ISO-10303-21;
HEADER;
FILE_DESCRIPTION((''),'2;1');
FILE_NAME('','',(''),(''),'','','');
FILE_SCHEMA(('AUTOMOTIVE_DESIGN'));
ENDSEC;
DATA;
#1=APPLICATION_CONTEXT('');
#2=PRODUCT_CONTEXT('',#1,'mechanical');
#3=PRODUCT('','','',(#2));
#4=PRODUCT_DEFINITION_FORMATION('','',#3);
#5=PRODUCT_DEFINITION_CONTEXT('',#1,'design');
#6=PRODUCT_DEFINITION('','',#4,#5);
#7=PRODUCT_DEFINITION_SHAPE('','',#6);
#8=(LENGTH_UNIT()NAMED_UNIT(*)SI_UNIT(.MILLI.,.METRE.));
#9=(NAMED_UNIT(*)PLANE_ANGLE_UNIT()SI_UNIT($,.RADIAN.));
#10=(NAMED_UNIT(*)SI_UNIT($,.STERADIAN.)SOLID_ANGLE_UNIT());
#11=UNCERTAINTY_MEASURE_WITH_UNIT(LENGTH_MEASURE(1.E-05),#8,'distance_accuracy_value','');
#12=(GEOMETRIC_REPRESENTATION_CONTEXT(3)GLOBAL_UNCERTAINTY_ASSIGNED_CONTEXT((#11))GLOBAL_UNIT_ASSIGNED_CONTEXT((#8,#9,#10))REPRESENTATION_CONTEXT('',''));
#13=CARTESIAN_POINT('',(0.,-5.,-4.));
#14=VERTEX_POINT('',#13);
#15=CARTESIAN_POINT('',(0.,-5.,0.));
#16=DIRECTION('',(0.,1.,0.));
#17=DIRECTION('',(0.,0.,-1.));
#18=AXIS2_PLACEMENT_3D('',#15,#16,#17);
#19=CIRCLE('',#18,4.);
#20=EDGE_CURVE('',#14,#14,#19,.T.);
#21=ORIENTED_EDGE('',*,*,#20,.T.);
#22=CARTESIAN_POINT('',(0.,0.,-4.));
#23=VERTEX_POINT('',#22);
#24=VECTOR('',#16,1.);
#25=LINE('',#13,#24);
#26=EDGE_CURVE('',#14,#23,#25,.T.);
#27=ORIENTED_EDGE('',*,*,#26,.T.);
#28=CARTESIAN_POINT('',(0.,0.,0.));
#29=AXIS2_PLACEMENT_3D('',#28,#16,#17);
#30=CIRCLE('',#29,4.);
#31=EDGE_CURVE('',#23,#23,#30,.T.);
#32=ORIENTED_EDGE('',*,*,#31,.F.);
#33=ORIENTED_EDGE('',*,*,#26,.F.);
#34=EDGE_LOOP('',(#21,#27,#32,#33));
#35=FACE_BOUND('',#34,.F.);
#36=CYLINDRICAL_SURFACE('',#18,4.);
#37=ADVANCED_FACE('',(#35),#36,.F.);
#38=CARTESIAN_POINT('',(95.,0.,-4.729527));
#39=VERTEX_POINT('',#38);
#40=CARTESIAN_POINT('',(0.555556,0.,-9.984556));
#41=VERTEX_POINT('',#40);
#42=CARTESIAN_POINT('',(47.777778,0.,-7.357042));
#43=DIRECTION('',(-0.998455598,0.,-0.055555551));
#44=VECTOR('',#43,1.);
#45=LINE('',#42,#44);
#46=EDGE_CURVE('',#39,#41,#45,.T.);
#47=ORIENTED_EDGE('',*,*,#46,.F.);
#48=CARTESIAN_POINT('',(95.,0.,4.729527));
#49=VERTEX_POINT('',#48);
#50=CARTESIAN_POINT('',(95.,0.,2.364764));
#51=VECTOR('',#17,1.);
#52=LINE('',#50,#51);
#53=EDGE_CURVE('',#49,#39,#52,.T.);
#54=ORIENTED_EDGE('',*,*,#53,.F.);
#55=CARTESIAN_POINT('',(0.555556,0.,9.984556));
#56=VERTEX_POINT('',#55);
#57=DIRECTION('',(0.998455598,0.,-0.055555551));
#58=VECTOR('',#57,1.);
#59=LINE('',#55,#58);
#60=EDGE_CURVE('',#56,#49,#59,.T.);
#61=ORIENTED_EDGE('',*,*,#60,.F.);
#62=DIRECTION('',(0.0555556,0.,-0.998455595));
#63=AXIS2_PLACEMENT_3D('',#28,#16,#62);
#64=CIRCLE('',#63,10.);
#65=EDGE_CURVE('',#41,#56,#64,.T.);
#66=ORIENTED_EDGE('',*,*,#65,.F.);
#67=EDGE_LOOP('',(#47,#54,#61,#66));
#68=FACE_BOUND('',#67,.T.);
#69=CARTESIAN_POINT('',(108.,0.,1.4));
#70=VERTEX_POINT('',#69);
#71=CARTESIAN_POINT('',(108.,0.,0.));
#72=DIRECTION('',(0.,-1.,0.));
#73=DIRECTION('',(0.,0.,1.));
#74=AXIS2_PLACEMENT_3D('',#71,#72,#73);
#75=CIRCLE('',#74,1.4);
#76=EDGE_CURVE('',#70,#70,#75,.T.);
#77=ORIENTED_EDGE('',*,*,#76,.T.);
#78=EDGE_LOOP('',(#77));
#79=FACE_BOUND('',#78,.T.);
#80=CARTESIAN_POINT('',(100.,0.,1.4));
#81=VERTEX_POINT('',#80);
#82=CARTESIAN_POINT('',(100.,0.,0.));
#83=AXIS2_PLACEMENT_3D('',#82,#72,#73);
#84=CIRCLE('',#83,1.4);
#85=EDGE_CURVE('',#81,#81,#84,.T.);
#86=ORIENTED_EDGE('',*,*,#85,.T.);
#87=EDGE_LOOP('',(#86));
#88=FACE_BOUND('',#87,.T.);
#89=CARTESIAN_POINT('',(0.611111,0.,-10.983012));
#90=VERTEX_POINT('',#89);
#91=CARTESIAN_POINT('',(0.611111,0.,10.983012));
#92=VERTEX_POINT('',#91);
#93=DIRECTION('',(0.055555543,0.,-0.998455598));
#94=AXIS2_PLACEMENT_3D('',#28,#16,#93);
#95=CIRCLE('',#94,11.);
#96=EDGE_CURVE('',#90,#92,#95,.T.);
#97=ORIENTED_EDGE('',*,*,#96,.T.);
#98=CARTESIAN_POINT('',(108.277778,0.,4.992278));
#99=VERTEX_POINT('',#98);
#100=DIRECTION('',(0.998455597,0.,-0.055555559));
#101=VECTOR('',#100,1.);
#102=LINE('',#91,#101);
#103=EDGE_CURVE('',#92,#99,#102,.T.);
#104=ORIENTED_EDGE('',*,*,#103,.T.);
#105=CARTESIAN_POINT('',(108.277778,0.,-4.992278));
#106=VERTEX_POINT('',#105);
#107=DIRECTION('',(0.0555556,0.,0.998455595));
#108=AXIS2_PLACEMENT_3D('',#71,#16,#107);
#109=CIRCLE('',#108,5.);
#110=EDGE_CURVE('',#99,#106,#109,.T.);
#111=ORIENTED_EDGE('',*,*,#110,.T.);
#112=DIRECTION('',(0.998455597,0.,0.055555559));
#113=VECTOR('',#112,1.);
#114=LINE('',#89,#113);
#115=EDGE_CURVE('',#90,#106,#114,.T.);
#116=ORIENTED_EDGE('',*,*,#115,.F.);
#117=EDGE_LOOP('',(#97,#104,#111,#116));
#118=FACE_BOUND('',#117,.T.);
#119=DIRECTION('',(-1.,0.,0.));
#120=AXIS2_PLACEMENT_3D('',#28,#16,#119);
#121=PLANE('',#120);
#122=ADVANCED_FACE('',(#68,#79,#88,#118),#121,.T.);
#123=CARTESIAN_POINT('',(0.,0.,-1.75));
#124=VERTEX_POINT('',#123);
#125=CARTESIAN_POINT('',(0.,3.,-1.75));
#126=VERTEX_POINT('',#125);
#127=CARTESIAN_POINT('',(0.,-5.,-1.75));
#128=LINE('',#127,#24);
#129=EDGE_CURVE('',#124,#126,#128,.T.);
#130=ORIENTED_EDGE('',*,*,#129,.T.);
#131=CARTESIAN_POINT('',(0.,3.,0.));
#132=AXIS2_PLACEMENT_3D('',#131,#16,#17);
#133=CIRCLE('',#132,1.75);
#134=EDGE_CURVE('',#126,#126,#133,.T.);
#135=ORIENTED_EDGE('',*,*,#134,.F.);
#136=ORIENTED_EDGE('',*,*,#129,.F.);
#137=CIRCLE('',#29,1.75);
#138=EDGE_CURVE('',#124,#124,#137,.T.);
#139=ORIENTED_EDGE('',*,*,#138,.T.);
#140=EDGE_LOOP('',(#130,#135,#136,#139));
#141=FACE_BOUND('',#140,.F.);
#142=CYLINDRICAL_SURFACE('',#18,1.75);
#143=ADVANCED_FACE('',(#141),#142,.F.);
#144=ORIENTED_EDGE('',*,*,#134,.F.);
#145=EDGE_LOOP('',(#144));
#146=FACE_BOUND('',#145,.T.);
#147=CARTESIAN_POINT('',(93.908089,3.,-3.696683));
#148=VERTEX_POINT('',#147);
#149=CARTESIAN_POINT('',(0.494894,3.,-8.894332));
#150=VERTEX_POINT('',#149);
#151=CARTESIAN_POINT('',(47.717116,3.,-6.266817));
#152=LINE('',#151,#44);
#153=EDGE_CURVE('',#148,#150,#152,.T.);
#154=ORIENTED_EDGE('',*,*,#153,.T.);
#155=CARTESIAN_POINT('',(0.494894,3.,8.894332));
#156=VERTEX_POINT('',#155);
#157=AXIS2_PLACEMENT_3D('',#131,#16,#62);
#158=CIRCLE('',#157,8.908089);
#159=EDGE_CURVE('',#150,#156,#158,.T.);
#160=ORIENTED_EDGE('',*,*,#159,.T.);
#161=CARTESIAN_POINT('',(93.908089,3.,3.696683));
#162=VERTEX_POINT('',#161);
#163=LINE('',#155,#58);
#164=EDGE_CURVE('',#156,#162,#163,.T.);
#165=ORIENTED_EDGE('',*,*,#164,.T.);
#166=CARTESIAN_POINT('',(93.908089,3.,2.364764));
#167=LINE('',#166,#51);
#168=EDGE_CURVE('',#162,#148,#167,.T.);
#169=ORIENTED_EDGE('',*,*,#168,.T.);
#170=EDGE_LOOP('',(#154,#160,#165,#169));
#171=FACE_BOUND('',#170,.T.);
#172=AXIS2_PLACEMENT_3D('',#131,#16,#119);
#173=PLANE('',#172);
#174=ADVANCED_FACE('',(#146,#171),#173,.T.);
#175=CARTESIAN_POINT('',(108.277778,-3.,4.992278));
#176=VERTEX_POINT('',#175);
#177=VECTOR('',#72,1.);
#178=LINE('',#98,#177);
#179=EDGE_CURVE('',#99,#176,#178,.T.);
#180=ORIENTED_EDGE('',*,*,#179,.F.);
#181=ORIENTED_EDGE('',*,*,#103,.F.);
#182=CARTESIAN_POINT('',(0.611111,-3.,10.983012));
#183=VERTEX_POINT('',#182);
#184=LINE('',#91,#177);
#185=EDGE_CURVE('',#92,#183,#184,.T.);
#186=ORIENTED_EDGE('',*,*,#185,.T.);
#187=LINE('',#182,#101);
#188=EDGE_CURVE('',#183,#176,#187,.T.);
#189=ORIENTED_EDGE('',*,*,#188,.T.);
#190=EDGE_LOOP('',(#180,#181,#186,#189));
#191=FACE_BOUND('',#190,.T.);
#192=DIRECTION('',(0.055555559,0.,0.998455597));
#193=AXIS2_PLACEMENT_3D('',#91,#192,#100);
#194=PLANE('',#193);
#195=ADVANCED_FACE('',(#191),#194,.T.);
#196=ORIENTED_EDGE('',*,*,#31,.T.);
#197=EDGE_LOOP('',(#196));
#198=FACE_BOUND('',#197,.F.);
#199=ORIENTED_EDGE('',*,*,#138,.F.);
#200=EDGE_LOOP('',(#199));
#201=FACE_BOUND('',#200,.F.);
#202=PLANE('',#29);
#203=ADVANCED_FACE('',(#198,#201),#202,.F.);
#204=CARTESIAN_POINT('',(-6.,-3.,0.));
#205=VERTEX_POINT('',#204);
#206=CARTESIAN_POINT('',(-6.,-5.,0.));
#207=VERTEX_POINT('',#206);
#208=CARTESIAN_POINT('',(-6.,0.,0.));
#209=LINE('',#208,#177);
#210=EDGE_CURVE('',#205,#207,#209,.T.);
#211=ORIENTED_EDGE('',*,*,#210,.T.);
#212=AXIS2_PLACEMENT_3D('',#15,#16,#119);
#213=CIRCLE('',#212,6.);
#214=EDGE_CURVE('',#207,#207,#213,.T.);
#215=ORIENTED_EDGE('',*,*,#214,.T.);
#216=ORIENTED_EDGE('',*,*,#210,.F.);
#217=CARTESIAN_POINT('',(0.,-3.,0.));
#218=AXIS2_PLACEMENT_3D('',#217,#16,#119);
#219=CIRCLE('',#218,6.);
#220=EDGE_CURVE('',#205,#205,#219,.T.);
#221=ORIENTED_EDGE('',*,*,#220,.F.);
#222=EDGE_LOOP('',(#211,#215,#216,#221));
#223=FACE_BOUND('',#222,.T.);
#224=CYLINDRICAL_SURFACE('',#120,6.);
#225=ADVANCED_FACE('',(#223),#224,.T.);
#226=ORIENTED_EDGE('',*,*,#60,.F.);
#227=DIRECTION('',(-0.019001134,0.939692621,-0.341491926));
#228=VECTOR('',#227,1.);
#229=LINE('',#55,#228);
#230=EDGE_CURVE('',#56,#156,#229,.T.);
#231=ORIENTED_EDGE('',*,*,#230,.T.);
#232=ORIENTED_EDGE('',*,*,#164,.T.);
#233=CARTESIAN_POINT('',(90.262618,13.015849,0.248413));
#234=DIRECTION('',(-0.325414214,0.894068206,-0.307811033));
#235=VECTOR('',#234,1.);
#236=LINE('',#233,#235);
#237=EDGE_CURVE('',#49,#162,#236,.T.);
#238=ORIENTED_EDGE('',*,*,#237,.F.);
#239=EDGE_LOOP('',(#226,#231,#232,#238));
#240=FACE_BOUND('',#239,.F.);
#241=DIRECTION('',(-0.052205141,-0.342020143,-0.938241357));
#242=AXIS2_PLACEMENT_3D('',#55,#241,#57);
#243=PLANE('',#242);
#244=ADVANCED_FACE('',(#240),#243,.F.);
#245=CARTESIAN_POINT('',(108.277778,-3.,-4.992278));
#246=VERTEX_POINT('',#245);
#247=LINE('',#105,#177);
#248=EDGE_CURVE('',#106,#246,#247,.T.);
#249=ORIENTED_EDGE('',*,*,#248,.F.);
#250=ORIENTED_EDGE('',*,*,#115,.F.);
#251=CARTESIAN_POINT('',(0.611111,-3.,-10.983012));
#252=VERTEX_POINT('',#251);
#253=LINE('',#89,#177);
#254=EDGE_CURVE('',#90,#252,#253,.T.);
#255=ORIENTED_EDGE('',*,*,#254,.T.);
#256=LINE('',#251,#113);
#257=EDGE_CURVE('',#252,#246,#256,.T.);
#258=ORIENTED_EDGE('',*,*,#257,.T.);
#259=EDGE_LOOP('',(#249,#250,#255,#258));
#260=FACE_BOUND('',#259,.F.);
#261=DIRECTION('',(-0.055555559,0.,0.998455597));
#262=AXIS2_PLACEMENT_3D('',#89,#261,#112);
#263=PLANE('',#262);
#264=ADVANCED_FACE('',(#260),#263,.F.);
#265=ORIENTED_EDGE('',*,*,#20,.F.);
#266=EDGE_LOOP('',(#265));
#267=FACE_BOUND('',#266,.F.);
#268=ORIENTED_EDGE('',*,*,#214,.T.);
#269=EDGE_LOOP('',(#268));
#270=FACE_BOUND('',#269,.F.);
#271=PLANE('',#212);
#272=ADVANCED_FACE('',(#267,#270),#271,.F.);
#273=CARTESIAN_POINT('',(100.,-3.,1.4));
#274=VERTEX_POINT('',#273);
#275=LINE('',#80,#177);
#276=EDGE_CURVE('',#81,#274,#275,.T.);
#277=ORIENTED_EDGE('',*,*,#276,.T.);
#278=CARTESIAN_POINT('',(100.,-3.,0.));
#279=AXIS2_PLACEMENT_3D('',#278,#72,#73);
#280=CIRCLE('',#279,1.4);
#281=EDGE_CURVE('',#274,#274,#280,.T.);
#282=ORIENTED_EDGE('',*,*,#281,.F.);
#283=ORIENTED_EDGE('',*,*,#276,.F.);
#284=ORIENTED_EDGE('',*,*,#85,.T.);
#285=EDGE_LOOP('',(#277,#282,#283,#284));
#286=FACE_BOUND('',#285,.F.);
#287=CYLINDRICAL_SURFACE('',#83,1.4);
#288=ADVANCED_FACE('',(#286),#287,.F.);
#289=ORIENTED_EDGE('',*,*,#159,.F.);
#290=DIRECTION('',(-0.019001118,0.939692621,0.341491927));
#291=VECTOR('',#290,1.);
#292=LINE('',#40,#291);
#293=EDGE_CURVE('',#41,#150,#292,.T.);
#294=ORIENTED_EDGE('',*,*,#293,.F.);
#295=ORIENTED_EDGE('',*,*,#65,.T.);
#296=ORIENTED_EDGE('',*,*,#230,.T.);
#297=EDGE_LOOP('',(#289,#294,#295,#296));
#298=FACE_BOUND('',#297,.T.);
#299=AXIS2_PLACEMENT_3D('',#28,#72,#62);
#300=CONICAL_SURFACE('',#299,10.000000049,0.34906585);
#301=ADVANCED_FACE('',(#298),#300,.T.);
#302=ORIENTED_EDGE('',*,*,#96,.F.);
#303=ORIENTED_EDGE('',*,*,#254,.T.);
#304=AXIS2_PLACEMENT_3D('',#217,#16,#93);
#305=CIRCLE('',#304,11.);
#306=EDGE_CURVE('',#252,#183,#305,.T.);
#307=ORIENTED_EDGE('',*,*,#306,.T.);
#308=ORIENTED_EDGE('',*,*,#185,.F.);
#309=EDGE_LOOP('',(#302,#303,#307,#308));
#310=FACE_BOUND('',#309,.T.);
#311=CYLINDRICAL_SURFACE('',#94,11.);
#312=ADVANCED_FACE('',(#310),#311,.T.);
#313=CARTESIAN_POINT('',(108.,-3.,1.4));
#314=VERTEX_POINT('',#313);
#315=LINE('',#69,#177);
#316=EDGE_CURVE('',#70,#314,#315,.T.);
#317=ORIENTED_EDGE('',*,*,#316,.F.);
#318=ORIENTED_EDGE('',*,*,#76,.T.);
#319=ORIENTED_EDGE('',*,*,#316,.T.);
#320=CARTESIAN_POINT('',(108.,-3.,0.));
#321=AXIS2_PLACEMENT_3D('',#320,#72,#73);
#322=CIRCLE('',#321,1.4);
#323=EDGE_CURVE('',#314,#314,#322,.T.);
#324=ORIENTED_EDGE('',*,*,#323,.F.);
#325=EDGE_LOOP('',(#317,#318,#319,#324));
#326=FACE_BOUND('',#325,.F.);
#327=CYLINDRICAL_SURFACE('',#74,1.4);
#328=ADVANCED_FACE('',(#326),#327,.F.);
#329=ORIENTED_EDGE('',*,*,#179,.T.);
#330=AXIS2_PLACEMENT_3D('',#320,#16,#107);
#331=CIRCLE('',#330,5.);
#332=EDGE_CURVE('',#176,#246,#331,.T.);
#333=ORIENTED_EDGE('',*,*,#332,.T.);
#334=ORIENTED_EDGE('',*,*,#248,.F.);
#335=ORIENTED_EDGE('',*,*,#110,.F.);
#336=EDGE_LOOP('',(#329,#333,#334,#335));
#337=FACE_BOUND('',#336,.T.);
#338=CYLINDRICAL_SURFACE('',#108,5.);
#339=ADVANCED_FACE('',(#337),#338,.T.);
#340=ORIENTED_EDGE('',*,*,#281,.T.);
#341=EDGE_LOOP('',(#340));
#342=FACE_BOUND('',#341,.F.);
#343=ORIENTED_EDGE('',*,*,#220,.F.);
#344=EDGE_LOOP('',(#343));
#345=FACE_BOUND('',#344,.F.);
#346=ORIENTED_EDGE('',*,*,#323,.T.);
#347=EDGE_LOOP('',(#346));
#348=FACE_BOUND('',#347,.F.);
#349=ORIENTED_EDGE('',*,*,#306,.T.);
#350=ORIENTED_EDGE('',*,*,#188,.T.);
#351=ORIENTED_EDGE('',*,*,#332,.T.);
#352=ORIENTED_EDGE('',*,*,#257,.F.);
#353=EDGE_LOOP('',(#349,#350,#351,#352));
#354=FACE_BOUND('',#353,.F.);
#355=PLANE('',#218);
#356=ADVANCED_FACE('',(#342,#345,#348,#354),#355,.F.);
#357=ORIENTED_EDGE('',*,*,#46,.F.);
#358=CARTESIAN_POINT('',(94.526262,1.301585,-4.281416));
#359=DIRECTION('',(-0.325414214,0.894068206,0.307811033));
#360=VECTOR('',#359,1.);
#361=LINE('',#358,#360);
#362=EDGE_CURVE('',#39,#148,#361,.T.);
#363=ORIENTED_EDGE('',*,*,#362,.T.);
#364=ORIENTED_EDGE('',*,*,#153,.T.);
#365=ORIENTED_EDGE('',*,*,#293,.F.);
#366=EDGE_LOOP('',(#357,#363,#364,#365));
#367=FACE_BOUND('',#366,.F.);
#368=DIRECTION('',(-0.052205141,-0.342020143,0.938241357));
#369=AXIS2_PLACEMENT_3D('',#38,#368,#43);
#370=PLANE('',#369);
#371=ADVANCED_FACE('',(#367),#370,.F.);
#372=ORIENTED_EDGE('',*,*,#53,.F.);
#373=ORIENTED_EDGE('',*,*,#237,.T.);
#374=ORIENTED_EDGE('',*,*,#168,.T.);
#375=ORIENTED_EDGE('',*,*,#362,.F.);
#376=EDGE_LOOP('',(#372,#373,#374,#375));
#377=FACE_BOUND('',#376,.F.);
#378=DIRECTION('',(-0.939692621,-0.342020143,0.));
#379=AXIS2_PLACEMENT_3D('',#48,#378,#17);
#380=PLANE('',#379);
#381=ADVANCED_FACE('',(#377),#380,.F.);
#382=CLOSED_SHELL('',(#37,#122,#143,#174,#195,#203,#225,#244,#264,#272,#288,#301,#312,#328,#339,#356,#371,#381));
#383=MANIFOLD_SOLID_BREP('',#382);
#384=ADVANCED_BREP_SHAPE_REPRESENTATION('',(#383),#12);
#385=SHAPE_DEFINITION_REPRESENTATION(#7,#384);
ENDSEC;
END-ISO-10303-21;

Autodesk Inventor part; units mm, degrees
ref_plane "YZ Plane" through (0, 0, 0) normal (1, 0, 0) x (0, 1, 0)
ref_plane "XZ Plane" through (0, 0, 0) normal (0, 1, 0) x (-1, 0, 0)
ref_plane "XY Plane" through (0, 0, 0) normal (0, 0, 1) x (1, 0, 0)
sketch "Sketch1" plane through (0, 0, 0) normal (0, 1, 0) x (-1, 0, 0)
  arc A0 (-0.611111, -10.983012) -> (-0.611111, 10.983012) centre (0, 0) ccw
  line L0 (0, 0) -> (-108, 0) construction
  arc A1 (-108.277778, 4.992278) -> (-108.277778, -4.992278) centre (-108, 0) ccw
  line L1 (-0.611111, 10.983012) -> (-108.277778, 4.992278)
  line L2 (-0.611111, -10.983012) -> (-108.277778, -4.992278)
  circle A2 centre (0, 0) radius 6
  line L3 (-108.222222, 3.993822) -> (-0.555556, 9.984556)
  arc A3 (-0.555556, -9.984556) -> (-0.555556, 9.984556) centre (0, 0) ccw
  line L4 (-0.555556, -9.984556) -> (-108.222222, -3.993822)
  arc A4 (-108.222222, 3.993822) -> (-108.222222, -3.993822) centre (-108, 0) ccw
  line L5 (-95, -4.729527) -> (-95, 4.729527)
  point P0 (-100, 0)
  dimension "d0" = 22
  dimension "d1" = 108
  dimension "d2" = 10
  dimension "d3" = 8
  dimension "d6" = 12
  dimension "d7" = 1
  dimension "d8" = 13
extrude "Extrusion1" add sketch "Sketch1" against normal blind 3 contours L2 A1 L1 A0 | A2 | L3 L5 L4 A4 | L3 A3 L4 L5
sketch "Sketch1 outline for Extrusion2" plane through (0, 0, 0) normal (0, 1, 0) x (-1, 0, 0)
  arc A0 (-0.555556, -9.984556) -> (-0.555556, 9.984556) centre (0, 0) ccw
  line L0 (-95, -4.729527) -> (-0.555556, -9.984556)
  line L1 (-95, 4.729527) -> (-95, -4.729527)
  line L2 (-0.555556, 9.984556) -> (-95, 4.729527)
extrude "Extrusion2" add sketch "Sketch1 outline for Extrusion2" along normal blind 3 draft -20
extrude "Extrusion3" add sketch "Sketch1" against normal blind 5 contours A2
hole "Hole1" at (108, 0, 0) at (100, 0, 0) direction (0, -1, 0) diameter 2.8 end through all
hole "Hole2" at (0, -5, 0) direction (0, 1, 0) diameter 3.5 end through all
hole "Hole3" at (0, -5, 0) direction (0, 1, 0) diameter 8 depth 5
properties part number "servo arm TGY-S8166M long"
